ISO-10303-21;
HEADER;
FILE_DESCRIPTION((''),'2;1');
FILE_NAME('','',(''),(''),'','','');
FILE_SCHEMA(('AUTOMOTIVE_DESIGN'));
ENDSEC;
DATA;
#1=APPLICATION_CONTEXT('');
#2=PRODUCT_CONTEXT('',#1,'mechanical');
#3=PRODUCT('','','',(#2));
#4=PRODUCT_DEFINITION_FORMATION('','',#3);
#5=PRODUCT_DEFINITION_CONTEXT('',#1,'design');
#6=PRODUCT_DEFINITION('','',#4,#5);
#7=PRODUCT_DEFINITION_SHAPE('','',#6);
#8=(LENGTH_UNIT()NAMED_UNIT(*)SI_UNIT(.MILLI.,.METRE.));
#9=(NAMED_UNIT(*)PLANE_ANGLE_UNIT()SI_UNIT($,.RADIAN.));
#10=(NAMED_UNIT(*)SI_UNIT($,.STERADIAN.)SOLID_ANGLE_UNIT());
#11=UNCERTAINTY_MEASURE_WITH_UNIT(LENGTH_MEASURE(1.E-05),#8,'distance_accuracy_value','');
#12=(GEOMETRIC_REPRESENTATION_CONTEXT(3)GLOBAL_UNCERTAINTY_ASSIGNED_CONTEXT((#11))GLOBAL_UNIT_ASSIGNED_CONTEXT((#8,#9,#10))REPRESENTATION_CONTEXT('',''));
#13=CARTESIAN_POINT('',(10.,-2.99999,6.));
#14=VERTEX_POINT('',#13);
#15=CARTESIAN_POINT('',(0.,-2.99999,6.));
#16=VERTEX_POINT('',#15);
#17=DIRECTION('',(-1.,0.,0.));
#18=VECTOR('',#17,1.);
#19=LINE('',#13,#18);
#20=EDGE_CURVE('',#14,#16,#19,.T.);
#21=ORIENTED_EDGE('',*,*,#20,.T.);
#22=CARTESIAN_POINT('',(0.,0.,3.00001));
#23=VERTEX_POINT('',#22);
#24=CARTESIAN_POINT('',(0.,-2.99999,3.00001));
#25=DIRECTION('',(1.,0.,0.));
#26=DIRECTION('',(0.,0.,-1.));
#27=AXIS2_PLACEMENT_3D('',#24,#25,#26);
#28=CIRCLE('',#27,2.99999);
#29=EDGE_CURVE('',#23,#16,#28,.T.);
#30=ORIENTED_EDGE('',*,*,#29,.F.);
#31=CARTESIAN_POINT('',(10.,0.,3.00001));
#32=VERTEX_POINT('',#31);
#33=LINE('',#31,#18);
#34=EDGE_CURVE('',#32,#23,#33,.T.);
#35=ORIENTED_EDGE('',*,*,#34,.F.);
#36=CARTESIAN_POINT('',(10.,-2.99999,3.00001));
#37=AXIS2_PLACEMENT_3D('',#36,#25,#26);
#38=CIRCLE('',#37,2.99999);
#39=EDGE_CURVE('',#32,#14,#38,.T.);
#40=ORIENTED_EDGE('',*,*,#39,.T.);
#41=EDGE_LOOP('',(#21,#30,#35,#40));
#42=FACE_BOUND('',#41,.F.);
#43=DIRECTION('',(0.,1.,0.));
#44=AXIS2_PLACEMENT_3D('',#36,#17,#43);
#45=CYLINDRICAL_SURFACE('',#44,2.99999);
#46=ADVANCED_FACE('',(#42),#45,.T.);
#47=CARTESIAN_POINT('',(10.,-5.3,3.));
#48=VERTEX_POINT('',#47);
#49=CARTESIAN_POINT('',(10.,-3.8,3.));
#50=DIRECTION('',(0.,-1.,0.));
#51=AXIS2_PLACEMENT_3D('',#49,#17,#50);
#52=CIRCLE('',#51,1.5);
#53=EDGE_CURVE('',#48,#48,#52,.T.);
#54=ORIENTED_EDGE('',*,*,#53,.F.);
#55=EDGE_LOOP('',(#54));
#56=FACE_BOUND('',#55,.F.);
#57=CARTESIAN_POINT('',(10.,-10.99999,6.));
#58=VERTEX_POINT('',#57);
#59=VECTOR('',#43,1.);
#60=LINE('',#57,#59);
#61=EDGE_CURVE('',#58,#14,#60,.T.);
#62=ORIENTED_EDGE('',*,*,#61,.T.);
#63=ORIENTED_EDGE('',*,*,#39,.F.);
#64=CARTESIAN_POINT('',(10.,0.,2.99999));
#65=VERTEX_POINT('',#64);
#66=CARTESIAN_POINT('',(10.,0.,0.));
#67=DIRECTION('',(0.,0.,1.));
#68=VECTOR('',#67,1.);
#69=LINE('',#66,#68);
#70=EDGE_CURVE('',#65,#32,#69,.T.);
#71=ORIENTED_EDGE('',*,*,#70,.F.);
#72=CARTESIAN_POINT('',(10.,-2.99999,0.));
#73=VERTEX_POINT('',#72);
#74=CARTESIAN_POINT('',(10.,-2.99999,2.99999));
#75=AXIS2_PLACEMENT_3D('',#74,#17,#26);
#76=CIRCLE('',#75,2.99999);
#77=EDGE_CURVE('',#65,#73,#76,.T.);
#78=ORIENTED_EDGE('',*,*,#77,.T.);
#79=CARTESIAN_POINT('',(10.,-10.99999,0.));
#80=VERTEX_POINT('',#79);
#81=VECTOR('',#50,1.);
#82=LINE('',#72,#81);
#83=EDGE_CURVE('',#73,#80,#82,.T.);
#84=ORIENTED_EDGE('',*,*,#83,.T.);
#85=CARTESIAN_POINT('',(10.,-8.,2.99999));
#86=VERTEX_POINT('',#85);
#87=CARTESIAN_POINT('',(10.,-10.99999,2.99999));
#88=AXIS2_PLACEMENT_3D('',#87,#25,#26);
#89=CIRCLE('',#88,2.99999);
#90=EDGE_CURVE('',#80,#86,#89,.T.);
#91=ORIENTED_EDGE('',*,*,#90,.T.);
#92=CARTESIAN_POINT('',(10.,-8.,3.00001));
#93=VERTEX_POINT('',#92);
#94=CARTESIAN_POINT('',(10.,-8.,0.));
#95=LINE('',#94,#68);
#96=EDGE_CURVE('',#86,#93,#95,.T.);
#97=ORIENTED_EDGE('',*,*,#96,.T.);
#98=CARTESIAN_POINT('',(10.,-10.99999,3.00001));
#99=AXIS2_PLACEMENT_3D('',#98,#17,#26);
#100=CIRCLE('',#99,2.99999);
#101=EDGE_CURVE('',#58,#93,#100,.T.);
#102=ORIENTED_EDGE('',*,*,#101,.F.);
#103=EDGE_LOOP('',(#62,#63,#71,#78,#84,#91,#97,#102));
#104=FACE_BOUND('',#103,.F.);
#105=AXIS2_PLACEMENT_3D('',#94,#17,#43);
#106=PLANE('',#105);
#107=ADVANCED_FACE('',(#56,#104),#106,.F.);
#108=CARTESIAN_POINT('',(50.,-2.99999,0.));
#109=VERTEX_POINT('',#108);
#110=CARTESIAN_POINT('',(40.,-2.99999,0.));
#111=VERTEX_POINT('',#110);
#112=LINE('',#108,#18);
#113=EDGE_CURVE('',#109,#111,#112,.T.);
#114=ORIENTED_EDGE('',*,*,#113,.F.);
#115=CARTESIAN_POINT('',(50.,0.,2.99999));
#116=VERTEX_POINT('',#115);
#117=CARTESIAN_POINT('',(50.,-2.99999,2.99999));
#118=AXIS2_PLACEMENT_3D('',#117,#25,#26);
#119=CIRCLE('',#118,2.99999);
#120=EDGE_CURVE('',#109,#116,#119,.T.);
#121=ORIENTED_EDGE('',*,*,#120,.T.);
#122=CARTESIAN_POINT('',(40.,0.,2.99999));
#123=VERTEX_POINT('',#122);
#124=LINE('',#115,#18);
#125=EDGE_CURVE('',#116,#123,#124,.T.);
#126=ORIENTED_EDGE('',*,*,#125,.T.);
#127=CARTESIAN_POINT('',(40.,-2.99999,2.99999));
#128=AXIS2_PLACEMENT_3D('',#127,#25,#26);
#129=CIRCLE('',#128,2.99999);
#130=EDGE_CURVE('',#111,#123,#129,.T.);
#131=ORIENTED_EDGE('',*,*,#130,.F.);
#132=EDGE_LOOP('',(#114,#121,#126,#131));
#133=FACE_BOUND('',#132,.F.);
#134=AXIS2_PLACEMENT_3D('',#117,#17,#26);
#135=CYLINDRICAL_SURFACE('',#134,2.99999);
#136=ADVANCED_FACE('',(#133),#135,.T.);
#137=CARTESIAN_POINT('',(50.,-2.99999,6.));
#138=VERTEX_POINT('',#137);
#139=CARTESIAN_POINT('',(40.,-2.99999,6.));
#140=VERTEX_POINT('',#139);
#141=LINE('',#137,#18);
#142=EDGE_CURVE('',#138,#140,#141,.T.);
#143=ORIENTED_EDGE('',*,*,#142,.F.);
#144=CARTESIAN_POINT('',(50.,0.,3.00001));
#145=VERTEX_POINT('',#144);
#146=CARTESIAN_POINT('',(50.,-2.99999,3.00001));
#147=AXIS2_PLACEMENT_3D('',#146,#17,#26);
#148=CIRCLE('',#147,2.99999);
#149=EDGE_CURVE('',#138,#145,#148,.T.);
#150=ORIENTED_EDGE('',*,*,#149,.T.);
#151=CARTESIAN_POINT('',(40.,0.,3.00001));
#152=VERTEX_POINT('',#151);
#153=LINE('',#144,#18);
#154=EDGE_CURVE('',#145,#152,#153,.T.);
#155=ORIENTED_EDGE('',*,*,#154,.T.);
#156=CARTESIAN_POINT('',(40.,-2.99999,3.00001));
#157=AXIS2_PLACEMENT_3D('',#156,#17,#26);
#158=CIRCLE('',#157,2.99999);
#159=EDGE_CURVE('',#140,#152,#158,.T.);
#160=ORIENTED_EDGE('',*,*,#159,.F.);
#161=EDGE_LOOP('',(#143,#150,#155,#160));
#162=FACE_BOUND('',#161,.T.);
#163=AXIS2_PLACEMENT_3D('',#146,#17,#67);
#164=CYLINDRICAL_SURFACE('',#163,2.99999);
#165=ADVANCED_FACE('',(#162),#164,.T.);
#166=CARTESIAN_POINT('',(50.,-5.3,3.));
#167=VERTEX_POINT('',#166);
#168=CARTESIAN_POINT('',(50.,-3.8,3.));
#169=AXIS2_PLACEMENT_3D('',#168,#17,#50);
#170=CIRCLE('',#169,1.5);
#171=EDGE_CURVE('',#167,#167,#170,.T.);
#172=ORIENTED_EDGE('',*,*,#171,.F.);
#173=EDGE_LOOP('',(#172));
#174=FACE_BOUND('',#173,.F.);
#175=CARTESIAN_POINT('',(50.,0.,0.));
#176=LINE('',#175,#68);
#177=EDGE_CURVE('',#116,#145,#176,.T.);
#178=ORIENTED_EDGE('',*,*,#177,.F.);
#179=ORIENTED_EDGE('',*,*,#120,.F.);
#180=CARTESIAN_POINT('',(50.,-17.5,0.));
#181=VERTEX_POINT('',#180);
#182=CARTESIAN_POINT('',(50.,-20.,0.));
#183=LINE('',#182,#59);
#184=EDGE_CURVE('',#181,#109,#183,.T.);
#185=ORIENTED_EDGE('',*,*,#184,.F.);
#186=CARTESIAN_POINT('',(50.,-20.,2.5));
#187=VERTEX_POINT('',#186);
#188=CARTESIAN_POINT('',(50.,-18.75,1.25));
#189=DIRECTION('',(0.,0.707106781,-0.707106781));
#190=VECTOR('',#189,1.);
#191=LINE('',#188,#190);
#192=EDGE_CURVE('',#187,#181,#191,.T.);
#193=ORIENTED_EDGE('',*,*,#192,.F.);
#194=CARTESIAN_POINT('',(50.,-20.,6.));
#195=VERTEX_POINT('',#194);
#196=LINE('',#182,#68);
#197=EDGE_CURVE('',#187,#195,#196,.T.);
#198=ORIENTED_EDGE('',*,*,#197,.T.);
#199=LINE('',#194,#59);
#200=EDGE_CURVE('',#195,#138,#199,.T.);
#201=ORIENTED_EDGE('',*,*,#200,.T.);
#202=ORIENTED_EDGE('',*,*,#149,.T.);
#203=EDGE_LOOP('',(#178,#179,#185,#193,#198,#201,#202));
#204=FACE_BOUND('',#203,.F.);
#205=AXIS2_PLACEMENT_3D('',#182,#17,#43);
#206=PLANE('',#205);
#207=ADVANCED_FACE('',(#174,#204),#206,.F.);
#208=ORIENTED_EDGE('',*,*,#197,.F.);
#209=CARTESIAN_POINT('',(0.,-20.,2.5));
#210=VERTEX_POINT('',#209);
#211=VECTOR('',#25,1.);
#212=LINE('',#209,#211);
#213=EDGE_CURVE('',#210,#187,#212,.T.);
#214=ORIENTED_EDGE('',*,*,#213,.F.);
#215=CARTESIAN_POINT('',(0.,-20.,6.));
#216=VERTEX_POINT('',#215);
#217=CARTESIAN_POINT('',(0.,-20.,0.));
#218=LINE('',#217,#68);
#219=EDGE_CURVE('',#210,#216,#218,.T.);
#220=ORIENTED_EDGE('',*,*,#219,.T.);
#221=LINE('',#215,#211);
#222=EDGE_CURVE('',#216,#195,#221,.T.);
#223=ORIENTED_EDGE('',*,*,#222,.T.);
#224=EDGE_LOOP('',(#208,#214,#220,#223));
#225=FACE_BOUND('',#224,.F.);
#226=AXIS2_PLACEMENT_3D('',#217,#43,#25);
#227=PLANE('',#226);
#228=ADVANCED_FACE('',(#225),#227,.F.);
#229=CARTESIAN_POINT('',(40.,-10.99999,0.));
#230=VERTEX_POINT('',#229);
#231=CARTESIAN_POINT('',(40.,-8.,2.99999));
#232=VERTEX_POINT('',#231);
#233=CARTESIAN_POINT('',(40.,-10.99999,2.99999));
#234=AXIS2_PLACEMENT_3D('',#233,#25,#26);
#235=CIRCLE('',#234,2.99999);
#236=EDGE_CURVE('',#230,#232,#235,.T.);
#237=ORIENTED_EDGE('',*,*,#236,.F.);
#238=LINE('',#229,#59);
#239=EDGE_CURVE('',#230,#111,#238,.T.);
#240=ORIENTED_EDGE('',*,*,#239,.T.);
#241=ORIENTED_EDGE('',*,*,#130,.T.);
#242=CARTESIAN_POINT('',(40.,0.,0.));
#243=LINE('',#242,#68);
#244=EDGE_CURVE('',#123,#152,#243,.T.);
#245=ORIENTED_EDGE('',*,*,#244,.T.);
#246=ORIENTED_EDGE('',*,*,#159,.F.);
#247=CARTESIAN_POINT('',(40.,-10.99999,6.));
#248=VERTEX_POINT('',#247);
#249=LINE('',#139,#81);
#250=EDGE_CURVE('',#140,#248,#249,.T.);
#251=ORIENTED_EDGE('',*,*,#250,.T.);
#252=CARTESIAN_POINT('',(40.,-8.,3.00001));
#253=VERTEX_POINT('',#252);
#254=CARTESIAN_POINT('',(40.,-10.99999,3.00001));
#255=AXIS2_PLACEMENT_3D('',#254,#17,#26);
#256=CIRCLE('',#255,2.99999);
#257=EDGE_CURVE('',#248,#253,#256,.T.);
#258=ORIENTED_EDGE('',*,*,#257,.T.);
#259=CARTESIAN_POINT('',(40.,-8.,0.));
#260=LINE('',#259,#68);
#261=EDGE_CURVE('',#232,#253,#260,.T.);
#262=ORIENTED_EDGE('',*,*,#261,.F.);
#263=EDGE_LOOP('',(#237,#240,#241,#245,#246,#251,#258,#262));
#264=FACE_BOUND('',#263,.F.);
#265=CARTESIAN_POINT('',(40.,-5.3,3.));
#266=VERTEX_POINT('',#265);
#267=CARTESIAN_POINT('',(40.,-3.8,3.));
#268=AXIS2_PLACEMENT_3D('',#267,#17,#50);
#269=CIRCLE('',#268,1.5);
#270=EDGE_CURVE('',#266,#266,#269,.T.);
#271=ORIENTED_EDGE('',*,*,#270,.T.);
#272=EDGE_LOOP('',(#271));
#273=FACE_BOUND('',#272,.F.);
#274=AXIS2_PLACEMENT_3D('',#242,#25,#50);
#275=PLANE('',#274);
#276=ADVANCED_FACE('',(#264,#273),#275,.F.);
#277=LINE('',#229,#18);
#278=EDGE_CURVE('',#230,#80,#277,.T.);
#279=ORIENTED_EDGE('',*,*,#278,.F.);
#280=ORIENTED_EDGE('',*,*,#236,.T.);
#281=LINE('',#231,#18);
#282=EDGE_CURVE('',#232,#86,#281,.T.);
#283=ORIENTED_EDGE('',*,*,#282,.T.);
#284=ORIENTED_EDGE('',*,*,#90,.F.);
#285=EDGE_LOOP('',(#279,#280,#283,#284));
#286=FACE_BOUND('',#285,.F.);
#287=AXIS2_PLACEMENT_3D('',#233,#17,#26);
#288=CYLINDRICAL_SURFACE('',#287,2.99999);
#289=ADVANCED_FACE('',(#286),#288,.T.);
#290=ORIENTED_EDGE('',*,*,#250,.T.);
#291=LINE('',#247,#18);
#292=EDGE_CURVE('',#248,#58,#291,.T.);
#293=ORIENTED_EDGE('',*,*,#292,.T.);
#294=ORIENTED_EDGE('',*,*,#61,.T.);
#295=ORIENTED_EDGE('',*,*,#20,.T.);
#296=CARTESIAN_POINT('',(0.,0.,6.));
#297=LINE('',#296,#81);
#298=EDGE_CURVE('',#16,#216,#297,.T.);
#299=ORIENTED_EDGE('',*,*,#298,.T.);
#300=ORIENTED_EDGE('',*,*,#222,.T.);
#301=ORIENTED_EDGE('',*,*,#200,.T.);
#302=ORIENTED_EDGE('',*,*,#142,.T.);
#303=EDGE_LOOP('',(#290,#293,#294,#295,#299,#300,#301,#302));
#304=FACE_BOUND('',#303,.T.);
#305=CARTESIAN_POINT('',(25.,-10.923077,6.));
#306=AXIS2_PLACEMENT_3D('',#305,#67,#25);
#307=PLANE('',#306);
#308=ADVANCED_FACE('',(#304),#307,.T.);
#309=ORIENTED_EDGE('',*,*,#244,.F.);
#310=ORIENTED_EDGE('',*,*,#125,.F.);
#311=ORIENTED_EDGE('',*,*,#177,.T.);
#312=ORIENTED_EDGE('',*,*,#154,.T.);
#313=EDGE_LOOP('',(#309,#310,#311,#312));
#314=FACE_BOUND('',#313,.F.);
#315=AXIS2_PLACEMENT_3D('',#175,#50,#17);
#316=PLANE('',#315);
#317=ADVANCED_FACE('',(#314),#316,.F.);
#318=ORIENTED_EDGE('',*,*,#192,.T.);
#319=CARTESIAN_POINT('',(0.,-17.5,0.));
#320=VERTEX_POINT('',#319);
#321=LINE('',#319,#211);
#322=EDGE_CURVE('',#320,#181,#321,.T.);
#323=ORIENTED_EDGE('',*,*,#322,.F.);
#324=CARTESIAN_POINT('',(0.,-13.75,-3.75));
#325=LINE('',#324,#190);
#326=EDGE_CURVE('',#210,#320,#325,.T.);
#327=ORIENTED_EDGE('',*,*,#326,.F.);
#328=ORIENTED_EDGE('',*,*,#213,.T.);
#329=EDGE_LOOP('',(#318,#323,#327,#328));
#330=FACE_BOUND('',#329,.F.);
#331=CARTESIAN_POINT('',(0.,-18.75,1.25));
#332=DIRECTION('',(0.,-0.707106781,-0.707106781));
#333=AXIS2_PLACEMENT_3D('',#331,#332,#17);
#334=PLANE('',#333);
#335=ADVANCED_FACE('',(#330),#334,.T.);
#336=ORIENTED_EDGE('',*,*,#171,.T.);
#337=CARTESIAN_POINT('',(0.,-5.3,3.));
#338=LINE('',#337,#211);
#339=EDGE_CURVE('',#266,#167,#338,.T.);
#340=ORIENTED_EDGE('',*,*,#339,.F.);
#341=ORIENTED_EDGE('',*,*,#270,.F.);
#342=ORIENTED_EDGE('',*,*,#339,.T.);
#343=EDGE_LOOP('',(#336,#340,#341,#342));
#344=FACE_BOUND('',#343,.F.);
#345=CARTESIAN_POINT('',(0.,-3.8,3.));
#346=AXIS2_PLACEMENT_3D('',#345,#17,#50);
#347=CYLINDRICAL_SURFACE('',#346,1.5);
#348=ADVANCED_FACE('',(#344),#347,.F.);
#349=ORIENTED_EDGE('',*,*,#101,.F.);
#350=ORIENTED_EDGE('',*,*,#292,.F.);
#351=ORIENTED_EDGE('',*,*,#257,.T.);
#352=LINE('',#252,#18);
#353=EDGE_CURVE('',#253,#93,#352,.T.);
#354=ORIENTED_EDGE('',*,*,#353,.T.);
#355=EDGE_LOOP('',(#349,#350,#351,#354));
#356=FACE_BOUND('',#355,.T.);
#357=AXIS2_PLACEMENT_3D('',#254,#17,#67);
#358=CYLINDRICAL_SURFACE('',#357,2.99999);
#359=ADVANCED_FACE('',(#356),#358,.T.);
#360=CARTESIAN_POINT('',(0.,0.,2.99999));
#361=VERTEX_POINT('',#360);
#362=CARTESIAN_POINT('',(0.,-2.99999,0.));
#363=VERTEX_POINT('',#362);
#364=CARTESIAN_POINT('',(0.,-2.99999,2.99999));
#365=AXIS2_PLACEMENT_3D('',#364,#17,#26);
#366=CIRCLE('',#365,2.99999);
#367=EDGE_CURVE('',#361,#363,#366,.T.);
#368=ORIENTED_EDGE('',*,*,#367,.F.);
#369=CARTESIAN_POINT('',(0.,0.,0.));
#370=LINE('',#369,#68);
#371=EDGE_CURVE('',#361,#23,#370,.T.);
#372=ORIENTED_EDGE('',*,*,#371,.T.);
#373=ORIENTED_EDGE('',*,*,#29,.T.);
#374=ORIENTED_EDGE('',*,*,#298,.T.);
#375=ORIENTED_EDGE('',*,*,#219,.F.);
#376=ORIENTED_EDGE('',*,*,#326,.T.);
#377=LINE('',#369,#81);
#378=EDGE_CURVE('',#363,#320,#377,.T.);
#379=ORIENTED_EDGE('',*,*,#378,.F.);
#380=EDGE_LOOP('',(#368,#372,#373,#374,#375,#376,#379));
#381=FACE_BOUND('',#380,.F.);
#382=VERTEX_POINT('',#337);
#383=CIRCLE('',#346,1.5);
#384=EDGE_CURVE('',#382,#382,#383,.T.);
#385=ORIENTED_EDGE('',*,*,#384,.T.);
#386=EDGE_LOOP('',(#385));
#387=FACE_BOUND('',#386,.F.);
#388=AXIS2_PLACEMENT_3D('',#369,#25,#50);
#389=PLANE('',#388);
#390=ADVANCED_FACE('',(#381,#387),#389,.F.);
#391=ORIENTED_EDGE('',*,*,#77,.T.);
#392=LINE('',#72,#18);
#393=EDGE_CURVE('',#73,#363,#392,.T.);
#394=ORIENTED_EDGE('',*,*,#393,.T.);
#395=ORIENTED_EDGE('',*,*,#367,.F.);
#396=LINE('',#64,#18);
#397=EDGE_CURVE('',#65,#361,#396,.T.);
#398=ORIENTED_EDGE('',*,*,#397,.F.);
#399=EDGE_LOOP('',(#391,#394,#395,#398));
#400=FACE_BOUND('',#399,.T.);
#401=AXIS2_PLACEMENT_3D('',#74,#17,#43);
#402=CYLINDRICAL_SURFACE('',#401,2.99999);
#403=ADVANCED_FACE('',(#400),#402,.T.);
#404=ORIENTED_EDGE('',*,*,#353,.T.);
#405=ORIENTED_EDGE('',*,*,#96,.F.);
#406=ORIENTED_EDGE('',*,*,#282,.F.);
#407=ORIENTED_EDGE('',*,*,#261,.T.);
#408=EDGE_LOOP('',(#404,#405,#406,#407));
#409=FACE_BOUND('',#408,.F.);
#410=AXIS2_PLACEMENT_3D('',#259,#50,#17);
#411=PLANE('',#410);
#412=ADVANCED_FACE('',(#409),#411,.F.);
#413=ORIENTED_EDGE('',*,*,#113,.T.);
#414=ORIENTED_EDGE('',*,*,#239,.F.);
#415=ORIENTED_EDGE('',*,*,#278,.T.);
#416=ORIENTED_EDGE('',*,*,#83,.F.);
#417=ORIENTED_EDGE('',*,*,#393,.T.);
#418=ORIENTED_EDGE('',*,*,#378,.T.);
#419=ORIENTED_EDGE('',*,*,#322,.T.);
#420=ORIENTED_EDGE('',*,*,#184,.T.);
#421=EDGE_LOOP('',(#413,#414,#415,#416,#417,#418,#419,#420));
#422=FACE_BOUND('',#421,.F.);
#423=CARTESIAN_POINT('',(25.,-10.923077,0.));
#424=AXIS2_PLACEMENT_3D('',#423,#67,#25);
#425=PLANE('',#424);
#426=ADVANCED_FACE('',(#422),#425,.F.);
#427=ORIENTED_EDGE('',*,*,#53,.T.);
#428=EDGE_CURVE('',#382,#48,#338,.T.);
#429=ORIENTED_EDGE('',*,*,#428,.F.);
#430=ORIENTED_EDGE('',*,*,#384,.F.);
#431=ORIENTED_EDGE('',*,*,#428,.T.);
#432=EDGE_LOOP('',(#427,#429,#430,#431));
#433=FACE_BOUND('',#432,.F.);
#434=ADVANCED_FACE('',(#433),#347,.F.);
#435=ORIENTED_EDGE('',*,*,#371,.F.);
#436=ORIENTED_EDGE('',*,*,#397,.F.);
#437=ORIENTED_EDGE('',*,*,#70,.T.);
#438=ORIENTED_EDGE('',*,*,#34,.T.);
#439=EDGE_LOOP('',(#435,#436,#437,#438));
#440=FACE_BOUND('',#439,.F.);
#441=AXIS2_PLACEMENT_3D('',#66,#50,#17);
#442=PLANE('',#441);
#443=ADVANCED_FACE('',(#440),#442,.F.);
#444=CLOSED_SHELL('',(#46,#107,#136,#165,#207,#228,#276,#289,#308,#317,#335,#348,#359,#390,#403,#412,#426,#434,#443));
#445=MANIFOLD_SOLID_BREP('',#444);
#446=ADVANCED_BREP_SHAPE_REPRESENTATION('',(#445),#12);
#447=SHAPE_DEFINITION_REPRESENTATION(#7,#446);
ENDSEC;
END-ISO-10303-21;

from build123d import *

# Parameters (mm, degrees)
F1_DEPTH = 6
F2_R     = 1.5
F3_DEPTH = 50.001
F4_R     = 2.99999
F5_SIZE  = 2.5


# Not quite as in the source:
# - a fillet or chamfer is up to 0.001 mm smaller than in the source, because OpenCascade refuses the exact size


with BuildPart() as f1:
    # F0 (on Top) → F1 (new body)
    with BuildSketch(Plane.XY):
        Polygon((0, 0), (0, -20), (50, -20), (50, 0), (40, 0), (40, -8), (10, -8), (10, 0), align=None)
    extrude(amount=F1_DEPTH)

    # F2 (on face) → F3 (cut, through all)
    with BuildSketch(Plane(origin=(0, 0, 0), x_dir=(0, -1, 0), z_dir=(-1, 0, 0))):
        with Locations((3.8, 3)):
            Circle(F2_R)
    extrude(amount=-F3_DEPTH, mode=Mode.SUBTRACT)

    # F4 (radius 3 in the source; OpenCascade refuses exactly that, so slightly less here)
    f4_edges = [f1.edges().sort_by_distance(p)[0] for p in [
        (5, 0, 6),
        (5, 0, 0),
        (45, 0, 6),
        (45, 0, 0),
        (25, -8, 6),
        (25, -8, 0),
    ]]
    fillet(f4_edges, radius=F4_R)

    # F5
    f5_edges = [f1.edges().sort_by_distance(p)[0] for p in [
        (25, -20, 0),
    ]]
    chamfer(f5_edges, length=F5_SIZE)


solid = f1.part
